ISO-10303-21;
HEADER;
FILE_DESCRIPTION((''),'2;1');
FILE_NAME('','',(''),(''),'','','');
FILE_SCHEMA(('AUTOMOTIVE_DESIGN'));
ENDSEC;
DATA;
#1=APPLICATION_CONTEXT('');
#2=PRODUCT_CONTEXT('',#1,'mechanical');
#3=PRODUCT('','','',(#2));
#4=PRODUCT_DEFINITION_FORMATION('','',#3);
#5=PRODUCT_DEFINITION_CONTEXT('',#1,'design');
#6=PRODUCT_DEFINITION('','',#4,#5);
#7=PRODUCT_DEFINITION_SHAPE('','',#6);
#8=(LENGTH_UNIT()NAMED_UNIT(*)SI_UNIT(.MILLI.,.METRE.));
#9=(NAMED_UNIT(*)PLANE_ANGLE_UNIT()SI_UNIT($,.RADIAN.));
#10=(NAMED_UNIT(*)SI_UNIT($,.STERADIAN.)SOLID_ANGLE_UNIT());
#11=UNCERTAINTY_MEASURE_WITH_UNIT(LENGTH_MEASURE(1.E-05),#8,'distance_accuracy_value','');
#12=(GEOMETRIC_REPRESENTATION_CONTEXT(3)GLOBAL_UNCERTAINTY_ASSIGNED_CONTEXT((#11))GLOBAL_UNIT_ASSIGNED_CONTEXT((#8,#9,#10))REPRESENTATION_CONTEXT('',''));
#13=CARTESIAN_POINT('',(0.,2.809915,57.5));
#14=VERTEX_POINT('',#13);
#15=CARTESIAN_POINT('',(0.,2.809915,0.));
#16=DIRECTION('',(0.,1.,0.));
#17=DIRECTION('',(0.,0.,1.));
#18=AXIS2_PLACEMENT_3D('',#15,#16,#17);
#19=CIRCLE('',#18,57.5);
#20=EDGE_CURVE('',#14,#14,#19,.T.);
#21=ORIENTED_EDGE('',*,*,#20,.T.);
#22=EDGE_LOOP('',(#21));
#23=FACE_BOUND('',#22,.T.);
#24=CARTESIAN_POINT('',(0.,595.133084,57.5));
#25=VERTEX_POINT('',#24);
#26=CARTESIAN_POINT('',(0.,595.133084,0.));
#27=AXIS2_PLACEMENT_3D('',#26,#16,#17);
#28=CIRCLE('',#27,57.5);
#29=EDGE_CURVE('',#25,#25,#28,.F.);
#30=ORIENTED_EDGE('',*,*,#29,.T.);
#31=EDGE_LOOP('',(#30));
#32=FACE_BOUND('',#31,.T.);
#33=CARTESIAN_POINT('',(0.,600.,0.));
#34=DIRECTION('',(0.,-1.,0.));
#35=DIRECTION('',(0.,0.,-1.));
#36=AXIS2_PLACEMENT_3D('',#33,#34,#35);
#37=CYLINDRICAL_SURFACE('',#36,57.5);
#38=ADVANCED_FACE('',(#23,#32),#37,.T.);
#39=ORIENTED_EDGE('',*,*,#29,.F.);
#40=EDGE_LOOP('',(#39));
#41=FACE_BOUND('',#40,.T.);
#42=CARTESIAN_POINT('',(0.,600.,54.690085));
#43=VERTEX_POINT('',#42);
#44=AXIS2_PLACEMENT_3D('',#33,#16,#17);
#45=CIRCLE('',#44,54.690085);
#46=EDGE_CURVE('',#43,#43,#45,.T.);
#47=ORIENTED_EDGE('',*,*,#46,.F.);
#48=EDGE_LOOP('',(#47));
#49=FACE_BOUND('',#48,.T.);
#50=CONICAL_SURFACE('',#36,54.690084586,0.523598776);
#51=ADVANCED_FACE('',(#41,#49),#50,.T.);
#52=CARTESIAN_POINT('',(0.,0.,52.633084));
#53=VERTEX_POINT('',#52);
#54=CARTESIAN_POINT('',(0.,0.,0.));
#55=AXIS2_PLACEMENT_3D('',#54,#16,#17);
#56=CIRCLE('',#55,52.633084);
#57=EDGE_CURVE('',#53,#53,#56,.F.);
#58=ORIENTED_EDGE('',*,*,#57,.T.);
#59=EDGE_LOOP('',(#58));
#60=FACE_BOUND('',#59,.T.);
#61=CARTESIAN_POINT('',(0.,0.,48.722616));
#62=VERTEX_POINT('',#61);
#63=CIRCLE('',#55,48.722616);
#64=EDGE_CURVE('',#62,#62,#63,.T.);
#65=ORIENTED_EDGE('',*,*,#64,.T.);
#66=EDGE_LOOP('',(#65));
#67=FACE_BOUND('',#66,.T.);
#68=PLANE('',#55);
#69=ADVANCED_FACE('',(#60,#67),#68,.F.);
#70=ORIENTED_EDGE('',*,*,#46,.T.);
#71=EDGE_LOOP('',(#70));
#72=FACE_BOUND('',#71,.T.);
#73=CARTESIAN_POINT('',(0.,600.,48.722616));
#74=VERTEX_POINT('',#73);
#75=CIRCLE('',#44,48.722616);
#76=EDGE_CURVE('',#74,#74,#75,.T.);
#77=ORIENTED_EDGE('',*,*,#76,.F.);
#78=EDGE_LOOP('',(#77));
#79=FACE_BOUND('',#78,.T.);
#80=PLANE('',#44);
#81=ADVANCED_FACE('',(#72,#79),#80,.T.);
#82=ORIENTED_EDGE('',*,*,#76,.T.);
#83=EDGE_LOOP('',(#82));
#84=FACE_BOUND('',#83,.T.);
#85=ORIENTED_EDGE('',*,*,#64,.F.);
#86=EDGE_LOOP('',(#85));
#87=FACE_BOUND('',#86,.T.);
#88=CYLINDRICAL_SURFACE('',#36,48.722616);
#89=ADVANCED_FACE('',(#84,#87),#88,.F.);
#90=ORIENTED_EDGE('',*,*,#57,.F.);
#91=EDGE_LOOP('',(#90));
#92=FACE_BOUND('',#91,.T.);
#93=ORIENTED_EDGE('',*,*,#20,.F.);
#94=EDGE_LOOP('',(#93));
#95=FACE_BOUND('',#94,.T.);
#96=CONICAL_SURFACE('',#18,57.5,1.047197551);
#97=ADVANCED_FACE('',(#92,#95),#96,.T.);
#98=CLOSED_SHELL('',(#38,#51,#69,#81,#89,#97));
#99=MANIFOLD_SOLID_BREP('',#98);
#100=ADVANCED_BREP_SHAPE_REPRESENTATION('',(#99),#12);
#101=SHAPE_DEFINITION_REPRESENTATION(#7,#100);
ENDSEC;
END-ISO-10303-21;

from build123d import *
from OCP.BRepFilletAPI import BRepFilletAPI_MakeChamfer

# Parameters (mm, degrees)
SKETCH1_R           = 57.5
BOSS_EXTRUDE1_DEPTH = 600
SKETCH2_R           = 48.722615626
CUT_EXTRUDE1_DEPTH  = 606.485342515
CHAMFER1_SIZE       = 4.866916263
CHAMFER1_SIZE2      = 2.809915414


with BuildPart() as part:
    # Sketch1 → Boss-Extrude1 (new body)
    with BuildSketch(Plane(origin=(0, 0, 0), x_dir=(1, 0, 0), z_dir=(0, 1, 0))):
        Circle(SKETCH1_R)
    extrude(amount=BOSS_EXTRUDE1_DEPTH)

    # Sketch2 → Cut-Extrude1 (cut, through all)
    with BuildSketch(Plane(origin=(0, 0, 0), x_dir=(1, 0, 0), z_dir=(0, 1, 0))):
        Circle(SKETCH2_R)
    extrude(amount=CUT_EXTRUDE1_DEPTH, mode=Mode.SUBTRACT)

    # Chamfer1: one chamfer whose edges measure the first distance from different faces: ONE call of the kernel's chamfer builder (chamfer() names one face for all edges)
    chamfer1_edges_1 = [part.edges().sort_by_distance(p)[0] for p in [
        (-57.5, 600, 0),
    ]]
    chamfer1_side_1 = [part.faces().sort_by_distance(p)[0] for p in [
        (-57.5, 300, 0),
    ]]
    chamfer1_edges_2 = [part.edges().sort_by_distance(p)[0] for p in [
        (-57.5, 0, 0),
    ]]
    chamfer1_side_2 = [part.faces().sort_by_distance(p)[0] for p in [
        (-55.873654403, 0, 0),
    ]]
    chamfer1 = BRepFilletAPI_MakeChamfer(part.part.solid().wrapped)
    for e in chamfer1_edges_1:
        chamfer1.Add(CHAMFER1_SIZE, CHAMFER1_SIZE2, e.wrapped, chamfer1_side_1[0].wrapped)  # the first distance lies on this face
    for e in chamfer1_edges_2:
        chamfer1.Add(CHAMFER1_SIZE, CHAMFER1_SIZE2, e.wrapped, chamfer1_side_2[0].wrapped)  # the first distance lies on this face
    add(Compound.cast(chamfer1.Shape()), mode=Mode.REPLACE)


solid = part.part
